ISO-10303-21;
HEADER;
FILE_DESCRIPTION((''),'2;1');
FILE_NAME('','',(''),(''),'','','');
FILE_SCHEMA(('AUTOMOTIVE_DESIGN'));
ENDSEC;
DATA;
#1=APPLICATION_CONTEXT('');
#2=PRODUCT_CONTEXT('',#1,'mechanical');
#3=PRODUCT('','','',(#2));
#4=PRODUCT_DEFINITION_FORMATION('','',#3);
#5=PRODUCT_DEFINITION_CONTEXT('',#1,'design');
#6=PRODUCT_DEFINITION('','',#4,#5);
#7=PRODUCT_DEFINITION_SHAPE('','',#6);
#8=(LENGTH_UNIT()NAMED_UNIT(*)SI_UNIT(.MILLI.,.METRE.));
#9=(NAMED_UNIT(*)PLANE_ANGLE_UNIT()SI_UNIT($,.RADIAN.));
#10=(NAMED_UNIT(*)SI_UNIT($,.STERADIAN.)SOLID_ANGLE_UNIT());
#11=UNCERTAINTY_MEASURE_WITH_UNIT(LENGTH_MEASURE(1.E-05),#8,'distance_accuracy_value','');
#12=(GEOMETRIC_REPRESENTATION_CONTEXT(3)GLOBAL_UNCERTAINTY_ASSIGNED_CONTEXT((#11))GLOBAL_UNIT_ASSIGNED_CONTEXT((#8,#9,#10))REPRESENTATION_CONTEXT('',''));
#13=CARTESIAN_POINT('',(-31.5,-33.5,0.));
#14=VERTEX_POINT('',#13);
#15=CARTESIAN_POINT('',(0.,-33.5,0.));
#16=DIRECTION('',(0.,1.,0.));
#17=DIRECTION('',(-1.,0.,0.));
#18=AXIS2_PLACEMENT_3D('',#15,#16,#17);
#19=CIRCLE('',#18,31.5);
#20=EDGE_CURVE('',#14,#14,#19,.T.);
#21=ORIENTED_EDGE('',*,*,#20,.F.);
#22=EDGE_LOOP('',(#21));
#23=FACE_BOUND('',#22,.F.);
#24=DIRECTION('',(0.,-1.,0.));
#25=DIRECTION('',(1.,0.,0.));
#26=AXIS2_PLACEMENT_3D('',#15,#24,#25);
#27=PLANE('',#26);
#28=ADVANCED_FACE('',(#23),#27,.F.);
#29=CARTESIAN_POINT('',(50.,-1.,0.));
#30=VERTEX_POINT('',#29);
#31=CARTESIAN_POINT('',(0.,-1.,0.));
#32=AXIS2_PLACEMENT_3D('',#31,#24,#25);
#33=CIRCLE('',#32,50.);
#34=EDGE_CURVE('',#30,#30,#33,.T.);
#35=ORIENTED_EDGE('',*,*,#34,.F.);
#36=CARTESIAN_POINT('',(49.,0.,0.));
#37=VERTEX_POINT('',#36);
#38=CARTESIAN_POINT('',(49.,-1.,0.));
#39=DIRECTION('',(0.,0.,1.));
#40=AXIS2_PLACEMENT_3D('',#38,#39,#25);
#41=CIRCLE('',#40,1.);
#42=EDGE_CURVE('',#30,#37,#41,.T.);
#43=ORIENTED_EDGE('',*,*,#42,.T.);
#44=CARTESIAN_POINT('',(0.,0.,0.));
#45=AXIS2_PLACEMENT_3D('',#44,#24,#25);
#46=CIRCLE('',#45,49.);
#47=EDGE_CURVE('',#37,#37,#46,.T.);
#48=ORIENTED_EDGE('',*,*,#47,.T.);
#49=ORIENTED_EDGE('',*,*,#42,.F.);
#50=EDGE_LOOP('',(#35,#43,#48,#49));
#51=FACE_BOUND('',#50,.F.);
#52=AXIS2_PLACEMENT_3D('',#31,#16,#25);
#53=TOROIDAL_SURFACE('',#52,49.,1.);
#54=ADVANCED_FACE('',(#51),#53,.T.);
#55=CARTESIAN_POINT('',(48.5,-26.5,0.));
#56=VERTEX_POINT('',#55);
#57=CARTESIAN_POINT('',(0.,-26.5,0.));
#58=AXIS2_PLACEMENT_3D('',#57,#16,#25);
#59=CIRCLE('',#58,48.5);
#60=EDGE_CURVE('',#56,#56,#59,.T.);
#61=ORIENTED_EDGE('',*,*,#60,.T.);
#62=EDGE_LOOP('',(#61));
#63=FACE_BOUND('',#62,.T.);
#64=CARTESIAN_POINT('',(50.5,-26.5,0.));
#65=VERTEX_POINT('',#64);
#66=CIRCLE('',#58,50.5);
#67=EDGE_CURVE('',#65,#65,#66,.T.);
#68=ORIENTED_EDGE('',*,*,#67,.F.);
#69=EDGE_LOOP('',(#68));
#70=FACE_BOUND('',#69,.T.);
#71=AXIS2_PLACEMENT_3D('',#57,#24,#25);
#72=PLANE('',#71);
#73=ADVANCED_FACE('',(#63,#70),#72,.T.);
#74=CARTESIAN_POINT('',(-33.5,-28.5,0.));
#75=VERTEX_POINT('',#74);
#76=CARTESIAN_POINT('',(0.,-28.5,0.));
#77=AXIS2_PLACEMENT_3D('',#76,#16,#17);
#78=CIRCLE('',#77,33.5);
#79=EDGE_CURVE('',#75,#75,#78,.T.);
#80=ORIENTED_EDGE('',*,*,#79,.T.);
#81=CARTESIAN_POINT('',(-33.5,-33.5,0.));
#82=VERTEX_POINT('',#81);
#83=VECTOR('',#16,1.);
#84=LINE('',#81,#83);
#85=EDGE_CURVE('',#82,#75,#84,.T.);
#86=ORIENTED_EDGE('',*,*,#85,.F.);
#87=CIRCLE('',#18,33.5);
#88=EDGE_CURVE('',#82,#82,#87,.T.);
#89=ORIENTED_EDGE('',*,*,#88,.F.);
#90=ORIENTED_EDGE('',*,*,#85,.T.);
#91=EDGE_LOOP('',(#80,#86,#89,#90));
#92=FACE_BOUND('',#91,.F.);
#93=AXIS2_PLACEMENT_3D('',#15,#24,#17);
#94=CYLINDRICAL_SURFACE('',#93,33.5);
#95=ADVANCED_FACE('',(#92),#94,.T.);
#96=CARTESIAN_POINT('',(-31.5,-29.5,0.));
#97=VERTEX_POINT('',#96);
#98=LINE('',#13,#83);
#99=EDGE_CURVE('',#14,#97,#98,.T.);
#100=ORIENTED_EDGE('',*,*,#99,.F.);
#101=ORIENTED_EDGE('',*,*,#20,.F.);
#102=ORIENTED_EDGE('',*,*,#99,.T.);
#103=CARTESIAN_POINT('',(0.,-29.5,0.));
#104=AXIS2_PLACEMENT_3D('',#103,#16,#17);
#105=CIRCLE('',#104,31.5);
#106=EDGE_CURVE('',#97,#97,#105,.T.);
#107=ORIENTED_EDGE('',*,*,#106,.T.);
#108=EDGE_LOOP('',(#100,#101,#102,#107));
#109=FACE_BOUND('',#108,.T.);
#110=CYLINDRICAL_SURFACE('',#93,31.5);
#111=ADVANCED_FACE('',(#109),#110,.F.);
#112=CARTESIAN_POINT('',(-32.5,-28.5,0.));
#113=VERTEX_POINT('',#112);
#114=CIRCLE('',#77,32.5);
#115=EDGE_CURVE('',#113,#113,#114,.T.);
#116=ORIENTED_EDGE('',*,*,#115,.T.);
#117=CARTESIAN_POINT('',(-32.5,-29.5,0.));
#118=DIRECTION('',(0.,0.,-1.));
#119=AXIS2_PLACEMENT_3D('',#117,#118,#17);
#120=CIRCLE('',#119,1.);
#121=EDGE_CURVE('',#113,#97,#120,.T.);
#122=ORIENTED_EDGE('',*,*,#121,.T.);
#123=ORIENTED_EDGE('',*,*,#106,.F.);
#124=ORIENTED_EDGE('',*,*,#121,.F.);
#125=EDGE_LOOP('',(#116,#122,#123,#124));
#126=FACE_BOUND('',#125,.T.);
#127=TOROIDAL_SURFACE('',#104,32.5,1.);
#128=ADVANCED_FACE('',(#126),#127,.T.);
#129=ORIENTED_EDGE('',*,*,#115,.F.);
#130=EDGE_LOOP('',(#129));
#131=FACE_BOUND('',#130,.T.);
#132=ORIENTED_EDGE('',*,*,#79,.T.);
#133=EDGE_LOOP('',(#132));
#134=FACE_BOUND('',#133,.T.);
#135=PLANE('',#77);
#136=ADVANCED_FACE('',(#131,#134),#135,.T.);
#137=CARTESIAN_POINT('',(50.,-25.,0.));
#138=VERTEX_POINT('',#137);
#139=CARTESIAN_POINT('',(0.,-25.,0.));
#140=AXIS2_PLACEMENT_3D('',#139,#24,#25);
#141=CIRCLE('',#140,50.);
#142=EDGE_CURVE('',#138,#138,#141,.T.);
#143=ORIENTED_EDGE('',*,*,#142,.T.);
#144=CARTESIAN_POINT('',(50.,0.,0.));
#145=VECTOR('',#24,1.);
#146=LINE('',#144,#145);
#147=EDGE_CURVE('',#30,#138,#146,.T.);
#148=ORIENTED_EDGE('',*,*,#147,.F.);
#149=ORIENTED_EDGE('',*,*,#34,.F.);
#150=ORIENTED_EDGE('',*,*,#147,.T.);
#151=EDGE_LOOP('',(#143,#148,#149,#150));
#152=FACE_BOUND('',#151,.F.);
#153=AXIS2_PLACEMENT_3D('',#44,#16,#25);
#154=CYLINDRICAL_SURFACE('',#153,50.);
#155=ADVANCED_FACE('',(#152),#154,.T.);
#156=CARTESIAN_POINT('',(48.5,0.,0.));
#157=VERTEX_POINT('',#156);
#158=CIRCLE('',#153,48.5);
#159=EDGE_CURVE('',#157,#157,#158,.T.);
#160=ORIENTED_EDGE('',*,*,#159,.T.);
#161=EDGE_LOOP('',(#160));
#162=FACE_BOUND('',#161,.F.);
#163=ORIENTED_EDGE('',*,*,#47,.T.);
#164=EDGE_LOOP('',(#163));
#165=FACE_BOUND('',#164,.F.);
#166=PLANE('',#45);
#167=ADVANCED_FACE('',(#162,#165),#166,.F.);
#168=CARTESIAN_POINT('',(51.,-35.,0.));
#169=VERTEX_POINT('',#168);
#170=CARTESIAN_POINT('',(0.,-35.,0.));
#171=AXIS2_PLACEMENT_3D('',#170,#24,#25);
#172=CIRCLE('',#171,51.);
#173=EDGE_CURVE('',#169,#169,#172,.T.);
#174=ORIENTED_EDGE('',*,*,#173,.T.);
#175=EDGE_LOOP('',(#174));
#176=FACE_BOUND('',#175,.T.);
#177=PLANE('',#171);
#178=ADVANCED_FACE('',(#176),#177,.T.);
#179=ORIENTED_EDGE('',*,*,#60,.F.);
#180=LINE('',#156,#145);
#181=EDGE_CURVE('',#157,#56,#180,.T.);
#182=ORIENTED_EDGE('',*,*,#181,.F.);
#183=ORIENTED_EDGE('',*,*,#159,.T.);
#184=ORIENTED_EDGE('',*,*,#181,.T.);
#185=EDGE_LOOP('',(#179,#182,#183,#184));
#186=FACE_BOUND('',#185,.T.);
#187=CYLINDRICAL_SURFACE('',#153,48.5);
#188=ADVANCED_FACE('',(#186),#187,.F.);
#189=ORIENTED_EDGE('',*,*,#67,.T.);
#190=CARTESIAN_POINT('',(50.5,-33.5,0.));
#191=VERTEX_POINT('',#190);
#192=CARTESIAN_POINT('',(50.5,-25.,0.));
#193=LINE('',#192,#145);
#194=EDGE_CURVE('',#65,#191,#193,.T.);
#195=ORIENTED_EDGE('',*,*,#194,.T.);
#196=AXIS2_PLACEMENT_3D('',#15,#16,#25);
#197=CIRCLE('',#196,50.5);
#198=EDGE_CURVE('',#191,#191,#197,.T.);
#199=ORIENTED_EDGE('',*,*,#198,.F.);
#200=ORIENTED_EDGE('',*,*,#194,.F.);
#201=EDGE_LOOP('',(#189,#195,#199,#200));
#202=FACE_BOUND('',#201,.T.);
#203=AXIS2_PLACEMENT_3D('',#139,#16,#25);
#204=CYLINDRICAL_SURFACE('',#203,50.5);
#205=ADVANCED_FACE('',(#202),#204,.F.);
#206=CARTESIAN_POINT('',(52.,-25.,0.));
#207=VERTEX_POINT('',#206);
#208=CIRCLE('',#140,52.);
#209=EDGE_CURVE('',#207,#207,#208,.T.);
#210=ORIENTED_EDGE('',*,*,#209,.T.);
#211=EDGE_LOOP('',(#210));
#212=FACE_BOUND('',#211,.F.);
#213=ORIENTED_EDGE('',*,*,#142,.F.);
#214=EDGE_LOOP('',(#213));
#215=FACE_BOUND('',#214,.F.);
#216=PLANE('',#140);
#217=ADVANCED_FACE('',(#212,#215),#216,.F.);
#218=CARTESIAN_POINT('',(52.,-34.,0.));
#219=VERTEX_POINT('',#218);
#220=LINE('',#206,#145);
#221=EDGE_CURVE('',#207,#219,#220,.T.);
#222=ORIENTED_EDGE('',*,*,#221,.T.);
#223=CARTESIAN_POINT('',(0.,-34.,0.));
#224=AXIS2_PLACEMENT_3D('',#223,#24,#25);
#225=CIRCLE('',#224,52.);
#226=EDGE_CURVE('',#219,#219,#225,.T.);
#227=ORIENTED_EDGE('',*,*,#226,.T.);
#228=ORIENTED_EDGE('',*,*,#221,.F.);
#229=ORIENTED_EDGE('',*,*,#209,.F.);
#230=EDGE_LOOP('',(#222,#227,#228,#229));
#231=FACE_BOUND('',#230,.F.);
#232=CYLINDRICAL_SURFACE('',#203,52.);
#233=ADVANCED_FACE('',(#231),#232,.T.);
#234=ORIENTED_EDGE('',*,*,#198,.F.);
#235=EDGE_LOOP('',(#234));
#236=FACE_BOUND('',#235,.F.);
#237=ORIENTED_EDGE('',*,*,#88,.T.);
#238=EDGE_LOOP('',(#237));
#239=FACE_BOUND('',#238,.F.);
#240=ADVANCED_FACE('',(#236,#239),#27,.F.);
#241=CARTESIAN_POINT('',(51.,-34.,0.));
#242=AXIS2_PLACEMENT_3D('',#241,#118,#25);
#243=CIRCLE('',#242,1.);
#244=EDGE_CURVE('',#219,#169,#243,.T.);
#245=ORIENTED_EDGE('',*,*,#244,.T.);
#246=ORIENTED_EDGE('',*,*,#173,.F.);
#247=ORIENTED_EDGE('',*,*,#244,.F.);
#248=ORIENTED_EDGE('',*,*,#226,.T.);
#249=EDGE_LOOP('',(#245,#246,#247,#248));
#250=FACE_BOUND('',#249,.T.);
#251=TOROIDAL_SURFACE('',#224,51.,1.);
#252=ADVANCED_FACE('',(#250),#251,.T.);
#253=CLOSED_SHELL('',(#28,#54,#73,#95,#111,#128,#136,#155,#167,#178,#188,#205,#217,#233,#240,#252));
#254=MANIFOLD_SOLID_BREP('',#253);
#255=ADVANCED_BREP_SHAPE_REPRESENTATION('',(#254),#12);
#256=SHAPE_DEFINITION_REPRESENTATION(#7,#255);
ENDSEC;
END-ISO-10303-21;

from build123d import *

# Parameters (mm, degrees)
F0_R     = 50
F1_DEPTH = 25
F2_R     = 52
F2_R_2   = 50
F3_DEPTH = 10
F5_T     = -1.5
F6_R     = 33.5
F6_R_2   = 31.5
F7_DEPTH = 5
F8_R     = 1


# Not quite as in the source:
# - a feature of the source that left no trace in its solid (it failed there, or was rolled back) is left out


with BuildPart() as f1:
    # F0 (on Front) → F1 (new body)
    with BuildSketch(Plane.XZ):
        Circle(F0_R)
    extrude(amount=F1_DEPTH)

    # F2 (on face) → F3 (join)
    with BuildSketch(Plane.XZ.offset(25)):
        Circle(F2_R)
        Circle(F2_R_2, mode=Mode.SUBTRACT)
        Circle(F2_R_2)
    extrude(amount=F3_DEPTH)

    # F5
    f5_openings = [f1.faces().sort_by_distance(p)[0] for p in [
        (0, 0, 0),
    ]]
    offset(amount=F5_T, openings=f5_openings, kind=Kind.INTERSECTION)

    # F6 (on face) → F7 (join)
    with BuildSketch(Plane(origin=(0, -33.5, 0), x_dir=(-1, 0, 0), z_dir=(0, 1, 0))):
        Circle(F6_R)
        Circle(F6_R_2, mode=Mode.SUBTRACT)
    extrude(amount=F7_DEPTH)

    # F8
    f8_edges = [f1.edges().sort_by_distance(p)[0] for p in [
        (31.5, -28.5, 0),
        (-52, -35, 0),
        (-50, 0, 0),
    ]]
    fillet(f8_edges, radius=F8_R)


solid = f1.part
